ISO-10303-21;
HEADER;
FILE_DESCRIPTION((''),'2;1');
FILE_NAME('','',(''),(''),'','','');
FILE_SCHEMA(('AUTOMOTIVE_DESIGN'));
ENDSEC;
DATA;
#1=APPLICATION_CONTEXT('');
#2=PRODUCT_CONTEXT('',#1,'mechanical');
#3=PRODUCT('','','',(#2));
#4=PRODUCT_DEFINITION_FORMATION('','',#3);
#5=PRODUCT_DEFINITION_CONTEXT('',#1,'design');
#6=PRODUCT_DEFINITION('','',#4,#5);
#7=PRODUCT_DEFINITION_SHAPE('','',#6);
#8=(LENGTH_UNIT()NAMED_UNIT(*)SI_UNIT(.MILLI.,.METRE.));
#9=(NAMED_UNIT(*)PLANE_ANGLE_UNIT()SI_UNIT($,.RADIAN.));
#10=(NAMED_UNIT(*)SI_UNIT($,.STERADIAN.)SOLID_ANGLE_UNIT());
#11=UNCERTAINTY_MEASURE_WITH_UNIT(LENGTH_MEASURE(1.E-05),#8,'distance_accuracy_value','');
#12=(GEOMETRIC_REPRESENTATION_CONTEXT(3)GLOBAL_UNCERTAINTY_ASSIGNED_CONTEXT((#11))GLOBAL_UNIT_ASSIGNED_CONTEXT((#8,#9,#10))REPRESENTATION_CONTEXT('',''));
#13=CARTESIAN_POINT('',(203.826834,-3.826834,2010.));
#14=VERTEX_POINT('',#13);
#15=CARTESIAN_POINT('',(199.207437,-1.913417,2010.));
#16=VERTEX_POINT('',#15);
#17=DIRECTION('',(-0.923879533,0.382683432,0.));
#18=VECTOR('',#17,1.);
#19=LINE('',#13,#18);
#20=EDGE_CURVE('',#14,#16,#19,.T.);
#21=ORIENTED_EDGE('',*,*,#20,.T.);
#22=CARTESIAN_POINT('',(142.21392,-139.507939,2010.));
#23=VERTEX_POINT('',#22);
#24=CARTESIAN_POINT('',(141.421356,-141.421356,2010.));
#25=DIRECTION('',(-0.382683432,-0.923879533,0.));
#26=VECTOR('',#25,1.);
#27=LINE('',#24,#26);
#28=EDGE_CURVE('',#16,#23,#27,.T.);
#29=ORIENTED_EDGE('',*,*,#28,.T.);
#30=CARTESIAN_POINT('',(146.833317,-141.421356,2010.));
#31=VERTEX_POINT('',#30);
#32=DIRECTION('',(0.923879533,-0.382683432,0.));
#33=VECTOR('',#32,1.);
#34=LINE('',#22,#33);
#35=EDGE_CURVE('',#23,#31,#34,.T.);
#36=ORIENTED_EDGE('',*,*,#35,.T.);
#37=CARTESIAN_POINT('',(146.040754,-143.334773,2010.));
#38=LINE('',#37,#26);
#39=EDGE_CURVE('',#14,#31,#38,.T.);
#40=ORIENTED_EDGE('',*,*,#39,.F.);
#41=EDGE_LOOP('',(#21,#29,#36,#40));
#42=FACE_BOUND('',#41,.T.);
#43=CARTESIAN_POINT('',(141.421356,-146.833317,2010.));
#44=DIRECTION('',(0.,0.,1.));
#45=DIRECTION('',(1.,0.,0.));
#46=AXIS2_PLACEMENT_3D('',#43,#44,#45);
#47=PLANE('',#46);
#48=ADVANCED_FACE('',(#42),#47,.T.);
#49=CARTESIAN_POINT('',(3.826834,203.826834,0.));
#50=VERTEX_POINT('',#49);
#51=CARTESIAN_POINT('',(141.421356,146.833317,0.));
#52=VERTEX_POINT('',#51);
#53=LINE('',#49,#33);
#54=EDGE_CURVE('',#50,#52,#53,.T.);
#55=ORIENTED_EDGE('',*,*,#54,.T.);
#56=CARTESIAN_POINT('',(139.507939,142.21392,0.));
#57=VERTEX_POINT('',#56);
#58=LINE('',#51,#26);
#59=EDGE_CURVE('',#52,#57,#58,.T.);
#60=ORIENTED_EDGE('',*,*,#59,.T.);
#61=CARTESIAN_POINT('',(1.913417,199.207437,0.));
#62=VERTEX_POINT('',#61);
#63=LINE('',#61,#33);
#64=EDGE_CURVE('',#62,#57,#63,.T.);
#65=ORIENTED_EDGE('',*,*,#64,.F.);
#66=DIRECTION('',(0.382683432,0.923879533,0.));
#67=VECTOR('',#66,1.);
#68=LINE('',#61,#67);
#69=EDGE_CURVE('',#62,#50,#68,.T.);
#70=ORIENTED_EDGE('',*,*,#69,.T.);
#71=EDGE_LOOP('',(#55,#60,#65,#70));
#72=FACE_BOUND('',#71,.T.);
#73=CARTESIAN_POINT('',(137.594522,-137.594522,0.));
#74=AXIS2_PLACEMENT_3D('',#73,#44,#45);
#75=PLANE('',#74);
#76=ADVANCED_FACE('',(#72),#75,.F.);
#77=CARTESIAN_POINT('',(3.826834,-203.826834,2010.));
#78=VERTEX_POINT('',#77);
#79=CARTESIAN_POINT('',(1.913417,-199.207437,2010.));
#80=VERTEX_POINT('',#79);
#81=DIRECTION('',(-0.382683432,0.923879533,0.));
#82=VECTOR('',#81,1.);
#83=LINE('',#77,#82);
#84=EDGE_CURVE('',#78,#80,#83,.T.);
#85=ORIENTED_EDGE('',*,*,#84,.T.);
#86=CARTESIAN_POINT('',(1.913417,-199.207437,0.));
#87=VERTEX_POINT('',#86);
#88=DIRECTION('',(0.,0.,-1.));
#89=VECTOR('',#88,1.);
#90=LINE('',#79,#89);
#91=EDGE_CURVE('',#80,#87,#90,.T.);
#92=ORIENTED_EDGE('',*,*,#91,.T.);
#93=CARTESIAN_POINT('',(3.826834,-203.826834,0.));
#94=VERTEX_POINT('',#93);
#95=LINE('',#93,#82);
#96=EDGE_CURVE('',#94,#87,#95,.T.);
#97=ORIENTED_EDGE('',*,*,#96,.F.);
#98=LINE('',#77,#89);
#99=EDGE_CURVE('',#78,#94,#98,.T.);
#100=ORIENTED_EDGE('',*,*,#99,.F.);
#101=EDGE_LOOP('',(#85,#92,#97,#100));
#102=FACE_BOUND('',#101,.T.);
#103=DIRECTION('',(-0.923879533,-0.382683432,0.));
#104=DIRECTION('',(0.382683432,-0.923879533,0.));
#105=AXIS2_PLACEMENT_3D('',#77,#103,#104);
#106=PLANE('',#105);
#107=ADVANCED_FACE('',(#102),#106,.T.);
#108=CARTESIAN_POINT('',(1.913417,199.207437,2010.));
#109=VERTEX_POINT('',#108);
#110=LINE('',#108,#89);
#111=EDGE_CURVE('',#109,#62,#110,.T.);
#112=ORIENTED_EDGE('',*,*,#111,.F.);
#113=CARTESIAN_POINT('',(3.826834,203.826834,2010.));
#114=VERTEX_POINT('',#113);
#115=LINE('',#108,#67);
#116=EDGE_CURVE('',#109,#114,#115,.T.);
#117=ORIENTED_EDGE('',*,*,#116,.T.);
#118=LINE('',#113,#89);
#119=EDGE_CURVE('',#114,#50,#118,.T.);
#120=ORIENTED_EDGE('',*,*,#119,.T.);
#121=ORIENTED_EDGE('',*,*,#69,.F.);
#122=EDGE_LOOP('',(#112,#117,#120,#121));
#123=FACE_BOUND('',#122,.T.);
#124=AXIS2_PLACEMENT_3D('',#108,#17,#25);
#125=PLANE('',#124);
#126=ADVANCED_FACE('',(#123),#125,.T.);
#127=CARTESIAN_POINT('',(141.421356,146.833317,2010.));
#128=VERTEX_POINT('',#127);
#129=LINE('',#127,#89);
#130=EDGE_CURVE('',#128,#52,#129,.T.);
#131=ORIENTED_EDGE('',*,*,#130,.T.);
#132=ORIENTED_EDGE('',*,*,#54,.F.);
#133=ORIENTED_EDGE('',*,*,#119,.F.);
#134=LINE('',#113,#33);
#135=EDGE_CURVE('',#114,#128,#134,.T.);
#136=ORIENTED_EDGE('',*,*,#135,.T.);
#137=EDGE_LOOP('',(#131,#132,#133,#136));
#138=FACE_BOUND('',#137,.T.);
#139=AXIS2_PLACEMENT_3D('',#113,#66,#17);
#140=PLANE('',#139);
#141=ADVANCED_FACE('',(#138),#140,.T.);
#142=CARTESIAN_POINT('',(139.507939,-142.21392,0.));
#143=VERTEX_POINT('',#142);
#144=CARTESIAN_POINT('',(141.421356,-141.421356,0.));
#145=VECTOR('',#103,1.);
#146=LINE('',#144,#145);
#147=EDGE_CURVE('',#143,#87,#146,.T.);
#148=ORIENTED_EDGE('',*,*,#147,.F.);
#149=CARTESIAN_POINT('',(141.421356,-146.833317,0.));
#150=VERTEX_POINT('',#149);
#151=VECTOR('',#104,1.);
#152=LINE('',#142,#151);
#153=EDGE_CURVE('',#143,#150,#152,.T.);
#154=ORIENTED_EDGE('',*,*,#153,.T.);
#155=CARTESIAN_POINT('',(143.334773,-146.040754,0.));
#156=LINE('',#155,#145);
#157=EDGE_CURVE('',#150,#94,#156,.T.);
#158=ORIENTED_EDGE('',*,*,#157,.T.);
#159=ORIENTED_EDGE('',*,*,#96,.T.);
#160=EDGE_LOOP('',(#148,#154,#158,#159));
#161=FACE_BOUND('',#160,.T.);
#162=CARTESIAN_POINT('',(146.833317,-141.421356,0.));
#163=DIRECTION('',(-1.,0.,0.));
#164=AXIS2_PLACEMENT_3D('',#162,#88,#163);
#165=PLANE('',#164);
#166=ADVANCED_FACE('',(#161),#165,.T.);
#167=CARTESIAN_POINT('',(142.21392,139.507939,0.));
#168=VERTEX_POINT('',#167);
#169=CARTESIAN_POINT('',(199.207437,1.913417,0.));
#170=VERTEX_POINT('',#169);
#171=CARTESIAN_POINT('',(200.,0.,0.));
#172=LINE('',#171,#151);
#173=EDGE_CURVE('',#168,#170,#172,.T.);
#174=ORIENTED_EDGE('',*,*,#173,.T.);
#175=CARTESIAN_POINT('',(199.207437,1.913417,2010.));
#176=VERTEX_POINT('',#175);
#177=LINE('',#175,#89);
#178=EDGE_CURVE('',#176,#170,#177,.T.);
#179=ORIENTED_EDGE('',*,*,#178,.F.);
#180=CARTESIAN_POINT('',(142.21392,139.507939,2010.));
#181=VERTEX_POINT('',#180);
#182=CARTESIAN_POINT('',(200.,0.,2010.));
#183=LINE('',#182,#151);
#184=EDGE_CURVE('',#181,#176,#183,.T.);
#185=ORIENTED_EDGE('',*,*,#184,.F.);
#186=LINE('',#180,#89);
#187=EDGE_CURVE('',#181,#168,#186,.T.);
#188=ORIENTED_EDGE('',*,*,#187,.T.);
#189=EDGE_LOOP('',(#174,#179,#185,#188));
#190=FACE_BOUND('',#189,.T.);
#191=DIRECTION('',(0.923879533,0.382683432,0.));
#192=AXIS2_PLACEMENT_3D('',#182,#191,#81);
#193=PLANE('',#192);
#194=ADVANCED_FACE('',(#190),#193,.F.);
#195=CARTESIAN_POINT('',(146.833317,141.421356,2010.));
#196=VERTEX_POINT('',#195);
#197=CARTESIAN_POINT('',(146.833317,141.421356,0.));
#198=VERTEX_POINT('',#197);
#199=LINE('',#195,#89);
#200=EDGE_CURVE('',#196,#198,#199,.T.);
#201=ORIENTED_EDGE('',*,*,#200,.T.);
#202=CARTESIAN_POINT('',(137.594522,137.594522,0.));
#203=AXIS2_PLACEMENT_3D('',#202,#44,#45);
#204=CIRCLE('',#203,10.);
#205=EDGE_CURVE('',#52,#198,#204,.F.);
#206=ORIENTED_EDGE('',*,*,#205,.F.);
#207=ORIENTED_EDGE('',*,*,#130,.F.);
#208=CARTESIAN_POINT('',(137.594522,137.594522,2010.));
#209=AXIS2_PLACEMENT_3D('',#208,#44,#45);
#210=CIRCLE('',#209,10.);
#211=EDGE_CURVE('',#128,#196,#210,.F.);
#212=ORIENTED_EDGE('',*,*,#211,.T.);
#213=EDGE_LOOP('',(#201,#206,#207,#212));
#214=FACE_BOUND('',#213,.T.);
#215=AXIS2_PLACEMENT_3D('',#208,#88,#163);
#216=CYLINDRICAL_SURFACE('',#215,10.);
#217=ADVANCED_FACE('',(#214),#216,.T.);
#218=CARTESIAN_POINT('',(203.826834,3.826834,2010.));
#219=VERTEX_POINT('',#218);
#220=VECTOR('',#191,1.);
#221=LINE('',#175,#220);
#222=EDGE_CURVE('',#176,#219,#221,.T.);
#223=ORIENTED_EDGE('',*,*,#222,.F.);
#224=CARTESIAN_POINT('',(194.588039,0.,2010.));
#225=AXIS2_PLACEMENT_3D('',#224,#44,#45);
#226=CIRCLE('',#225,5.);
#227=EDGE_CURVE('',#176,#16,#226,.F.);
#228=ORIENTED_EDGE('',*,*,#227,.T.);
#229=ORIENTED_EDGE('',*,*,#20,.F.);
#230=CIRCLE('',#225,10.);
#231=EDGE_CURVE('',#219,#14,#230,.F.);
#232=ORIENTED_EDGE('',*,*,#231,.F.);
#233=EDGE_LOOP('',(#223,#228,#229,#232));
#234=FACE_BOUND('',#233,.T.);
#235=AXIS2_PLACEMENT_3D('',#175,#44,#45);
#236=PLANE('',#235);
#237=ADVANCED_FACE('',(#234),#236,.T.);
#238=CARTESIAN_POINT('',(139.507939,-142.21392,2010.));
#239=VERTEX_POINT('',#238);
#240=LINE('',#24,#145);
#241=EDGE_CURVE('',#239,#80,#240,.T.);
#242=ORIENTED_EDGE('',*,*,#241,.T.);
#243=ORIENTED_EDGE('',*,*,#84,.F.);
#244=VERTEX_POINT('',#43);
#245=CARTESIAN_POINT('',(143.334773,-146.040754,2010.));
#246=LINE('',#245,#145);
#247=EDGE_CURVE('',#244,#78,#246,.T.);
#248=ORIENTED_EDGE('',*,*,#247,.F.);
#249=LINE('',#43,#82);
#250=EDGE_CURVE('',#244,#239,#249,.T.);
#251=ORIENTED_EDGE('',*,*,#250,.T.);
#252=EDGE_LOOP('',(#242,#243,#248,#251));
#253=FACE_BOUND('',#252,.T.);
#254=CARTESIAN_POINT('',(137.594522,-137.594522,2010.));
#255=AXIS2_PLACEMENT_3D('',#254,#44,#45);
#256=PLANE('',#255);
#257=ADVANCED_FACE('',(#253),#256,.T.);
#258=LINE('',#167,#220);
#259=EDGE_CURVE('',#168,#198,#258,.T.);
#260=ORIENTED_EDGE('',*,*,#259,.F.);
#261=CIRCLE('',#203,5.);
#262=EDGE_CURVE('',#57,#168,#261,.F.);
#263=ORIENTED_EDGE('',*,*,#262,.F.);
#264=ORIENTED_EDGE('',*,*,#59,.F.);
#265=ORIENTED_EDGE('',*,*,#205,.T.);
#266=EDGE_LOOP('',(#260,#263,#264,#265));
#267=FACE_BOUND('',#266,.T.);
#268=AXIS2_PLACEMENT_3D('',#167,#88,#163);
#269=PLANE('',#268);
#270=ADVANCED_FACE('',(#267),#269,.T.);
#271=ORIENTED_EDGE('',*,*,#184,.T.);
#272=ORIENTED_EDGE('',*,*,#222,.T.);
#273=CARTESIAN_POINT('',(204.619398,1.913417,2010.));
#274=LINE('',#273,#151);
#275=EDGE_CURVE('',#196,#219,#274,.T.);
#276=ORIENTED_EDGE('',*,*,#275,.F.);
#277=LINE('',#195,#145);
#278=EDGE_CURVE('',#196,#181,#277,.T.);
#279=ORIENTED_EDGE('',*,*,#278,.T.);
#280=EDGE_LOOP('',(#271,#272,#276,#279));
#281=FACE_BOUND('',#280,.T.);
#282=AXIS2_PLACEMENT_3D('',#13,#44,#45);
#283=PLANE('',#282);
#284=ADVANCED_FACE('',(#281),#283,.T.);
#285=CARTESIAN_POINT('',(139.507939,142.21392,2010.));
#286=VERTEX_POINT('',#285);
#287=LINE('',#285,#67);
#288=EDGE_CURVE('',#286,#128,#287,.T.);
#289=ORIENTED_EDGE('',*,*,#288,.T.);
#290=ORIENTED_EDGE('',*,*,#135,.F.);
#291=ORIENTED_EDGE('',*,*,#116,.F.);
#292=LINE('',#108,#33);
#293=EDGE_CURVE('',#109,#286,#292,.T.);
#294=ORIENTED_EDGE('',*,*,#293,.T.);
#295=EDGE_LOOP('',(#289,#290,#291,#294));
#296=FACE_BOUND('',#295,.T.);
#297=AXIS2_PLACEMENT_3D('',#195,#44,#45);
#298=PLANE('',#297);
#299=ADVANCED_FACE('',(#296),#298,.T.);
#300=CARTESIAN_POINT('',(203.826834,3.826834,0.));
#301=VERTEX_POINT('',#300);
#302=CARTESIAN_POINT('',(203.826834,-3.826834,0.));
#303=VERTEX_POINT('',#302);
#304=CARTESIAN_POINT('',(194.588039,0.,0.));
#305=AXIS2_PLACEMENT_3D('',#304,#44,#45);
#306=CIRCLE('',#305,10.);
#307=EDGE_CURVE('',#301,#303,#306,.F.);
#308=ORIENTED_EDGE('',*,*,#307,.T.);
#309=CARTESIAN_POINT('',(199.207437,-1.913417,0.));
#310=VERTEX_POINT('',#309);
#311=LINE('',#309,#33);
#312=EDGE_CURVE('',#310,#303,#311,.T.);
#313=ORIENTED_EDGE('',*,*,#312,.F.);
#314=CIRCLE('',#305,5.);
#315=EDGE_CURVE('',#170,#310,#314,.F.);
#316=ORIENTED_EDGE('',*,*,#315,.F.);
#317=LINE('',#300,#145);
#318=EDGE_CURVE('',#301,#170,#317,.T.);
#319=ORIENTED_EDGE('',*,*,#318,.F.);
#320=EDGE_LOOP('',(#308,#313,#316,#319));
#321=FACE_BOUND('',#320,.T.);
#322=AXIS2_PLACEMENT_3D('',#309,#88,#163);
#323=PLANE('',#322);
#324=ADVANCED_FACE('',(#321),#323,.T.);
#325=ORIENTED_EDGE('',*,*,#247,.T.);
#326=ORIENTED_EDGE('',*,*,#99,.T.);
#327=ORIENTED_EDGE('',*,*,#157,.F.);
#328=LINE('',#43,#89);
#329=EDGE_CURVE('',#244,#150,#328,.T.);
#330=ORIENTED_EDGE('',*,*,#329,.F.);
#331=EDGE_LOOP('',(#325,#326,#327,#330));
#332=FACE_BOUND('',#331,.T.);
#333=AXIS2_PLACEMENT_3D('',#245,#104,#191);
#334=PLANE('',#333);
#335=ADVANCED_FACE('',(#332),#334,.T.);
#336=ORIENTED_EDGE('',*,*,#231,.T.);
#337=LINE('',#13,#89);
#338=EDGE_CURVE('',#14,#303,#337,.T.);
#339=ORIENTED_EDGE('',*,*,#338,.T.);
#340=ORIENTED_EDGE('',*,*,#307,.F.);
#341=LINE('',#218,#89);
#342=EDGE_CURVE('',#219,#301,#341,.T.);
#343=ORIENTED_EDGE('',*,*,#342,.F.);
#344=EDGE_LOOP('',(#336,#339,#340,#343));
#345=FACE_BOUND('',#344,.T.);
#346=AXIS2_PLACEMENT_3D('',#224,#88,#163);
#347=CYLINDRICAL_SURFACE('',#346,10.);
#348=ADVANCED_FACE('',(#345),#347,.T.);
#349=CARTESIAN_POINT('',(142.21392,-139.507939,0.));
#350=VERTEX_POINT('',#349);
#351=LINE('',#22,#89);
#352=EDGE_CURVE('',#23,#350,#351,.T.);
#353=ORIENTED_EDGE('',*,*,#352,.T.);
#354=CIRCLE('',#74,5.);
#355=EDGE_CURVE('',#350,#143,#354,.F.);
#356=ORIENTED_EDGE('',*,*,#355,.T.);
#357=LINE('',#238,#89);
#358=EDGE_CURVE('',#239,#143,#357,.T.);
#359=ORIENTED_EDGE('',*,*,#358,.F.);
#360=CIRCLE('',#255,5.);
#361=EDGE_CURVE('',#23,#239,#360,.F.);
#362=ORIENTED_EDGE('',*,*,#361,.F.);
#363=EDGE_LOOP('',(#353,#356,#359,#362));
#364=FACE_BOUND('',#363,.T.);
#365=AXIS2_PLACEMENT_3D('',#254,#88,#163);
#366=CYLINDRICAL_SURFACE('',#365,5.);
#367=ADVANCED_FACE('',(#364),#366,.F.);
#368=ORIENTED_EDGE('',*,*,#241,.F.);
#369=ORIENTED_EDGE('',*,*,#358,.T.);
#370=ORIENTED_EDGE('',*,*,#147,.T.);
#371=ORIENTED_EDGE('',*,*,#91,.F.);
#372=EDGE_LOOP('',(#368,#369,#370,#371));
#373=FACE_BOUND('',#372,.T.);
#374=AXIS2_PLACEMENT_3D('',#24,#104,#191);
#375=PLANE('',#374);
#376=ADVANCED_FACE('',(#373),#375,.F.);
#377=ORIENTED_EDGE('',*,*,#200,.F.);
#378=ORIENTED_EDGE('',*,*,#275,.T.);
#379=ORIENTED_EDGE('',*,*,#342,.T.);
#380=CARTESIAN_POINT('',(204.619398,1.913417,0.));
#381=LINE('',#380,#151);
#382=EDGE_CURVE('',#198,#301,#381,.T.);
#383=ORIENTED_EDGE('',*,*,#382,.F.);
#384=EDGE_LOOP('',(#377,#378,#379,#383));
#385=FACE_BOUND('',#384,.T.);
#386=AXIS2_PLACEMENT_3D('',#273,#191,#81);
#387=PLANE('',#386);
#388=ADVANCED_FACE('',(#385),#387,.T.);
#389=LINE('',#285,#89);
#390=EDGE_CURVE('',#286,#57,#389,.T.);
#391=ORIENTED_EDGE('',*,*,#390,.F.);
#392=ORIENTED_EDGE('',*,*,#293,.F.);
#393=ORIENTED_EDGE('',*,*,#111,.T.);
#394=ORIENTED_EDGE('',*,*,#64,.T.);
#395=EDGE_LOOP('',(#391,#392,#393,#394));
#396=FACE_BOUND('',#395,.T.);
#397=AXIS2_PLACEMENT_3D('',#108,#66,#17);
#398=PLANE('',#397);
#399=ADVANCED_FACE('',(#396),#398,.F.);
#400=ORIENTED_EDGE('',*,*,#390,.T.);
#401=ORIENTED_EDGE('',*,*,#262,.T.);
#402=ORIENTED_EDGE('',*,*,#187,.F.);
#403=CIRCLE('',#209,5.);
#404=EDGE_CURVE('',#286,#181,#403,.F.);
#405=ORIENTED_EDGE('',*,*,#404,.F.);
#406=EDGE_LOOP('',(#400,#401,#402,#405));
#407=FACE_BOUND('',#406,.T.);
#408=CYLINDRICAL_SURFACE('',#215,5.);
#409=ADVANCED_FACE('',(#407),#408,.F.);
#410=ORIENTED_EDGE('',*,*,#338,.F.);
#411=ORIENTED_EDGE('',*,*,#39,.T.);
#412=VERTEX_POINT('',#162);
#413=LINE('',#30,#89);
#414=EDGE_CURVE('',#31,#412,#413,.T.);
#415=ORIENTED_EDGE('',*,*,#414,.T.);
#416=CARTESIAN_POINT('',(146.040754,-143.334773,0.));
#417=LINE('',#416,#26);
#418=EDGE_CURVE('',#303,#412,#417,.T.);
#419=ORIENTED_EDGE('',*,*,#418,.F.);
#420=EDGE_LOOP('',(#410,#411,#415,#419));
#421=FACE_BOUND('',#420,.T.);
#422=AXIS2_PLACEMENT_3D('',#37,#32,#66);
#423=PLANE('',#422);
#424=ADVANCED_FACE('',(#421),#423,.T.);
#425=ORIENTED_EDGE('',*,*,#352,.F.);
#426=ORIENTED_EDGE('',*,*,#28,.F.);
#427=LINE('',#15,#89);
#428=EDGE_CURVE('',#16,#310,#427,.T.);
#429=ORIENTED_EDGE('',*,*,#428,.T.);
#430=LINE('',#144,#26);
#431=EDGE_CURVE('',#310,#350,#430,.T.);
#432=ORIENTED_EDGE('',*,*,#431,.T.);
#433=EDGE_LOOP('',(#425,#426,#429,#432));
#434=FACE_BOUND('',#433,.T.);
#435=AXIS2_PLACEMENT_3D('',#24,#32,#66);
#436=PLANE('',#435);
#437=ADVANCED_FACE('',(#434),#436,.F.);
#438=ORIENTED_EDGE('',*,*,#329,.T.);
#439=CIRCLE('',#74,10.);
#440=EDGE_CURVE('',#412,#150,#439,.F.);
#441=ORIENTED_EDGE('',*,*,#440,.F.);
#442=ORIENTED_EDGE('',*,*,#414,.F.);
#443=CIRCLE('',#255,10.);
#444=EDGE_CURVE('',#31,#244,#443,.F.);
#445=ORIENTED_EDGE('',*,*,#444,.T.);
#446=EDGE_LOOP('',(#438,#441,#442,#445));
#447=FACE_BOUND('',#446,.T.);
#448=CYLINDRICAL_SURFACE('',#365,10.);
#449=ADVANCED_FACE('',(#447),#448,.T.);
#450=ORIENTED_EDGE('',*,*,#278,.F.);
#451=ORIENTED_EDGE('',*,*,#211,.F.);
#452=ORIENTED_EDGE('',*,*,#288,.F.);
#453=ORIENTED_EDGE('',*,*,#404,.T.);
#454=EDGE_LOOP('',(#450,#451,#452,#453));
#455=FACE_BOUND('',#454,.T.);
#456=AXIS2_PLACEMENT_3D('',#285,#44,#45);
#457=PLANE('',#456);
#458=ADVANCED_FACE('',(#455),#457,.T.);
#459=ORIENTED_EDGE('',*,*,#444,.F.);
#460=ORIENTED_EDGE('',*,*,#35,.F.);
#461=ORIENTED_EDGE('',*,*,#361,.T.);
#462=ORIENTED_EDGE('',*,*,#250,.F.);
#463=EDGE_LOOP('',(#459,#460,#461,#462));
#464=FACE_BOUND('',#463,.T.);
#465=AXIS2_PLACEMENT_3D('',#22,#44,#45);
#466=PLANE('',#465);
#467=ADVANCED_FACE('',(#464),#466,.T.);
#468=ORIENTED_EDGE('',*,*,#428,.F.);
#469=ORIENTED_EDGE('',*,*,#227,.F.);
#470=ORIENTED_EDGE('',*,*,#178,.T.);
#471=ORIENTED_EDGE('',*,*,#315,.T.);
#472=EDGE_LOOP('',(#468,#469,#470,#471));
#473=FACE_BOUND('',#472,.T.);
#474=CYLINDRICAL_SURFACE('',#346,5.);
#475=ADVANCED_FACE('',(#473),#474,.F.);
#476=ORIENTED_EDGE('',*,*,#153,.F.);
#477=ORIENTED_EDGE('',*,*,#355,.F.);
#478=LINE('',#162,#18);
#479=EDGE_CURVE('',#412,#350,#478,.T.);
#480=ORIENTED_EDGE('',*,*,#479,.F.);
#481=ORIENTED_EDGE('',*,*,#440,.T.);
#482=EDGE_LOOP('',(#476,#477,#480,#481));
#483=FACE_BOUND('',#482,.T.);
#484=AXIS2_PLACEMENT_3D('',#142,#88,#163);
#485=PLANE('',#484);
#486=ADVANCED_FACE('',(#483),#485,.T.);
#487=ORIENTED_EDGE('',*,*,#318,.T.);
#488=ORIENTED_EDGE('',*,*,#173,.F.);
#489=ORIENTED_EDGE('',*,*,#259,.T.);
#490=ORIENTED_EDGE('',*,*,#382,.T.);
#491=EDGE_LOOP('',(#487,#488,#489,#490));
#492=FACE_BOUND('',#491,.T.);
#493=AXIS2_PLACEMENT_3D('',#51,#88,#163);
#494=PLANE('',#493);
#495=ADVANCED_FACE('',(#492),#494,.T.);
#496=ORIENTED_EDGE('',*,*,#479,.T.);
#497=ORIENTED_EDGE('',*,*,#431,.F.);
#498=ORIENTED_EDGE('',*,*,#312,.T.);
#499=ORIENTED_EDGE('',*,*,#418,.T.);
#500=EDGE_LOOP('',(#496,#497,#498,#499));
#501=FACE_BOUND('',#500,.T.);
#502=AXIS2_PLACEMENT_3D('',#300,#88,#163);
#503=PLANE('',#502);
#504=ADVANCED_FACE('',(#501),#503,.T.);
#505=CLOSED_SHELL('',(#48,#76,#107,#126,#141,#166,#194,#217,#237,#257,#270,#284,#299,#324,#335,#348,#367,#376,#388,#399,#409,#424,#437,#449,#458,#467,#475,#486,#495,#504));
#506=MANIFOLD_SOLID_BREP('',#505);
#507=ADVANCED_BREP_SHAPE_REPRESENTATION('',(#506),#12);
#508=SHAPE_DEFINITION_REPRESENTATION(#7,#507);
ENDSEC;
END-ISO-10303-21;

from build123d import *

# Parameters (mm, degrees)
TABAN_FLAN_1_DEPTH = 2010


# Sheet-metal steps are written as plain solids
with BuildPart() as part:
    # Çizim1 → Taban-Flanş1 (new body)
    with BuildSketch(Plane.XY):
        with BuildLine():
            Line((1.913417162, -199.207436661), (139.507939075, -142.213919576))
            ThreePointArc((139.507939075, -142.213919576), (141.13005582, -141.13005582), (142.213919576, -139.507939075))
            Line((142.213919576, -139.507939075), (199.207436661, -1.913417162))
            ThreePointArc((199.207436661, -1.913417162), (199.588038999, 0), (199.207436661, 1.913417162))
            Line((199.207436661, 1.913417162), (142.213919576, 139.507939075))
            ThreePointArc((142.213919576, 139.507939075), (141.13005582, 141.13005582), (139.507939075, 142.213919576))
            Line((139.507939075, 142.213919576), (1.913417162, 199.207436661))
            Line((1.913417162, 199.207436661), (3.826834324, 203.826834324))
            Line((3.826834324, 203.826834324), (141.421356237, 146.833317239))
            ThreePointArc((141.421356237, 146.833317239), (144.665589726, 144.665589726), (146.833317239, 141.421356237))
            Line((146.833317239, 141.421356237), (203.826834324, 3.826834324))
            ThreePointArc((203.826834324, 3.826834324), (204.588038999, 0), (203.826834324, -3.826834324))
            Line((203.826834324, -3.826834324), (146.833317239, -141.421356237))
            ThreePointArc((146.833317239, -141.421356237), (144.665589726, -144.665589726), (141.421356237, -146.833317239))
            Line((141.421356237, -146.833317239), (3.826834324, -203.826834324))
            Line((3.826834324, -203.826834324), (1.913417162, -199.207436661))
        make_face()
    extrude(amount=TABAN_FLAN_1_DEPTH)


solid = part.part
